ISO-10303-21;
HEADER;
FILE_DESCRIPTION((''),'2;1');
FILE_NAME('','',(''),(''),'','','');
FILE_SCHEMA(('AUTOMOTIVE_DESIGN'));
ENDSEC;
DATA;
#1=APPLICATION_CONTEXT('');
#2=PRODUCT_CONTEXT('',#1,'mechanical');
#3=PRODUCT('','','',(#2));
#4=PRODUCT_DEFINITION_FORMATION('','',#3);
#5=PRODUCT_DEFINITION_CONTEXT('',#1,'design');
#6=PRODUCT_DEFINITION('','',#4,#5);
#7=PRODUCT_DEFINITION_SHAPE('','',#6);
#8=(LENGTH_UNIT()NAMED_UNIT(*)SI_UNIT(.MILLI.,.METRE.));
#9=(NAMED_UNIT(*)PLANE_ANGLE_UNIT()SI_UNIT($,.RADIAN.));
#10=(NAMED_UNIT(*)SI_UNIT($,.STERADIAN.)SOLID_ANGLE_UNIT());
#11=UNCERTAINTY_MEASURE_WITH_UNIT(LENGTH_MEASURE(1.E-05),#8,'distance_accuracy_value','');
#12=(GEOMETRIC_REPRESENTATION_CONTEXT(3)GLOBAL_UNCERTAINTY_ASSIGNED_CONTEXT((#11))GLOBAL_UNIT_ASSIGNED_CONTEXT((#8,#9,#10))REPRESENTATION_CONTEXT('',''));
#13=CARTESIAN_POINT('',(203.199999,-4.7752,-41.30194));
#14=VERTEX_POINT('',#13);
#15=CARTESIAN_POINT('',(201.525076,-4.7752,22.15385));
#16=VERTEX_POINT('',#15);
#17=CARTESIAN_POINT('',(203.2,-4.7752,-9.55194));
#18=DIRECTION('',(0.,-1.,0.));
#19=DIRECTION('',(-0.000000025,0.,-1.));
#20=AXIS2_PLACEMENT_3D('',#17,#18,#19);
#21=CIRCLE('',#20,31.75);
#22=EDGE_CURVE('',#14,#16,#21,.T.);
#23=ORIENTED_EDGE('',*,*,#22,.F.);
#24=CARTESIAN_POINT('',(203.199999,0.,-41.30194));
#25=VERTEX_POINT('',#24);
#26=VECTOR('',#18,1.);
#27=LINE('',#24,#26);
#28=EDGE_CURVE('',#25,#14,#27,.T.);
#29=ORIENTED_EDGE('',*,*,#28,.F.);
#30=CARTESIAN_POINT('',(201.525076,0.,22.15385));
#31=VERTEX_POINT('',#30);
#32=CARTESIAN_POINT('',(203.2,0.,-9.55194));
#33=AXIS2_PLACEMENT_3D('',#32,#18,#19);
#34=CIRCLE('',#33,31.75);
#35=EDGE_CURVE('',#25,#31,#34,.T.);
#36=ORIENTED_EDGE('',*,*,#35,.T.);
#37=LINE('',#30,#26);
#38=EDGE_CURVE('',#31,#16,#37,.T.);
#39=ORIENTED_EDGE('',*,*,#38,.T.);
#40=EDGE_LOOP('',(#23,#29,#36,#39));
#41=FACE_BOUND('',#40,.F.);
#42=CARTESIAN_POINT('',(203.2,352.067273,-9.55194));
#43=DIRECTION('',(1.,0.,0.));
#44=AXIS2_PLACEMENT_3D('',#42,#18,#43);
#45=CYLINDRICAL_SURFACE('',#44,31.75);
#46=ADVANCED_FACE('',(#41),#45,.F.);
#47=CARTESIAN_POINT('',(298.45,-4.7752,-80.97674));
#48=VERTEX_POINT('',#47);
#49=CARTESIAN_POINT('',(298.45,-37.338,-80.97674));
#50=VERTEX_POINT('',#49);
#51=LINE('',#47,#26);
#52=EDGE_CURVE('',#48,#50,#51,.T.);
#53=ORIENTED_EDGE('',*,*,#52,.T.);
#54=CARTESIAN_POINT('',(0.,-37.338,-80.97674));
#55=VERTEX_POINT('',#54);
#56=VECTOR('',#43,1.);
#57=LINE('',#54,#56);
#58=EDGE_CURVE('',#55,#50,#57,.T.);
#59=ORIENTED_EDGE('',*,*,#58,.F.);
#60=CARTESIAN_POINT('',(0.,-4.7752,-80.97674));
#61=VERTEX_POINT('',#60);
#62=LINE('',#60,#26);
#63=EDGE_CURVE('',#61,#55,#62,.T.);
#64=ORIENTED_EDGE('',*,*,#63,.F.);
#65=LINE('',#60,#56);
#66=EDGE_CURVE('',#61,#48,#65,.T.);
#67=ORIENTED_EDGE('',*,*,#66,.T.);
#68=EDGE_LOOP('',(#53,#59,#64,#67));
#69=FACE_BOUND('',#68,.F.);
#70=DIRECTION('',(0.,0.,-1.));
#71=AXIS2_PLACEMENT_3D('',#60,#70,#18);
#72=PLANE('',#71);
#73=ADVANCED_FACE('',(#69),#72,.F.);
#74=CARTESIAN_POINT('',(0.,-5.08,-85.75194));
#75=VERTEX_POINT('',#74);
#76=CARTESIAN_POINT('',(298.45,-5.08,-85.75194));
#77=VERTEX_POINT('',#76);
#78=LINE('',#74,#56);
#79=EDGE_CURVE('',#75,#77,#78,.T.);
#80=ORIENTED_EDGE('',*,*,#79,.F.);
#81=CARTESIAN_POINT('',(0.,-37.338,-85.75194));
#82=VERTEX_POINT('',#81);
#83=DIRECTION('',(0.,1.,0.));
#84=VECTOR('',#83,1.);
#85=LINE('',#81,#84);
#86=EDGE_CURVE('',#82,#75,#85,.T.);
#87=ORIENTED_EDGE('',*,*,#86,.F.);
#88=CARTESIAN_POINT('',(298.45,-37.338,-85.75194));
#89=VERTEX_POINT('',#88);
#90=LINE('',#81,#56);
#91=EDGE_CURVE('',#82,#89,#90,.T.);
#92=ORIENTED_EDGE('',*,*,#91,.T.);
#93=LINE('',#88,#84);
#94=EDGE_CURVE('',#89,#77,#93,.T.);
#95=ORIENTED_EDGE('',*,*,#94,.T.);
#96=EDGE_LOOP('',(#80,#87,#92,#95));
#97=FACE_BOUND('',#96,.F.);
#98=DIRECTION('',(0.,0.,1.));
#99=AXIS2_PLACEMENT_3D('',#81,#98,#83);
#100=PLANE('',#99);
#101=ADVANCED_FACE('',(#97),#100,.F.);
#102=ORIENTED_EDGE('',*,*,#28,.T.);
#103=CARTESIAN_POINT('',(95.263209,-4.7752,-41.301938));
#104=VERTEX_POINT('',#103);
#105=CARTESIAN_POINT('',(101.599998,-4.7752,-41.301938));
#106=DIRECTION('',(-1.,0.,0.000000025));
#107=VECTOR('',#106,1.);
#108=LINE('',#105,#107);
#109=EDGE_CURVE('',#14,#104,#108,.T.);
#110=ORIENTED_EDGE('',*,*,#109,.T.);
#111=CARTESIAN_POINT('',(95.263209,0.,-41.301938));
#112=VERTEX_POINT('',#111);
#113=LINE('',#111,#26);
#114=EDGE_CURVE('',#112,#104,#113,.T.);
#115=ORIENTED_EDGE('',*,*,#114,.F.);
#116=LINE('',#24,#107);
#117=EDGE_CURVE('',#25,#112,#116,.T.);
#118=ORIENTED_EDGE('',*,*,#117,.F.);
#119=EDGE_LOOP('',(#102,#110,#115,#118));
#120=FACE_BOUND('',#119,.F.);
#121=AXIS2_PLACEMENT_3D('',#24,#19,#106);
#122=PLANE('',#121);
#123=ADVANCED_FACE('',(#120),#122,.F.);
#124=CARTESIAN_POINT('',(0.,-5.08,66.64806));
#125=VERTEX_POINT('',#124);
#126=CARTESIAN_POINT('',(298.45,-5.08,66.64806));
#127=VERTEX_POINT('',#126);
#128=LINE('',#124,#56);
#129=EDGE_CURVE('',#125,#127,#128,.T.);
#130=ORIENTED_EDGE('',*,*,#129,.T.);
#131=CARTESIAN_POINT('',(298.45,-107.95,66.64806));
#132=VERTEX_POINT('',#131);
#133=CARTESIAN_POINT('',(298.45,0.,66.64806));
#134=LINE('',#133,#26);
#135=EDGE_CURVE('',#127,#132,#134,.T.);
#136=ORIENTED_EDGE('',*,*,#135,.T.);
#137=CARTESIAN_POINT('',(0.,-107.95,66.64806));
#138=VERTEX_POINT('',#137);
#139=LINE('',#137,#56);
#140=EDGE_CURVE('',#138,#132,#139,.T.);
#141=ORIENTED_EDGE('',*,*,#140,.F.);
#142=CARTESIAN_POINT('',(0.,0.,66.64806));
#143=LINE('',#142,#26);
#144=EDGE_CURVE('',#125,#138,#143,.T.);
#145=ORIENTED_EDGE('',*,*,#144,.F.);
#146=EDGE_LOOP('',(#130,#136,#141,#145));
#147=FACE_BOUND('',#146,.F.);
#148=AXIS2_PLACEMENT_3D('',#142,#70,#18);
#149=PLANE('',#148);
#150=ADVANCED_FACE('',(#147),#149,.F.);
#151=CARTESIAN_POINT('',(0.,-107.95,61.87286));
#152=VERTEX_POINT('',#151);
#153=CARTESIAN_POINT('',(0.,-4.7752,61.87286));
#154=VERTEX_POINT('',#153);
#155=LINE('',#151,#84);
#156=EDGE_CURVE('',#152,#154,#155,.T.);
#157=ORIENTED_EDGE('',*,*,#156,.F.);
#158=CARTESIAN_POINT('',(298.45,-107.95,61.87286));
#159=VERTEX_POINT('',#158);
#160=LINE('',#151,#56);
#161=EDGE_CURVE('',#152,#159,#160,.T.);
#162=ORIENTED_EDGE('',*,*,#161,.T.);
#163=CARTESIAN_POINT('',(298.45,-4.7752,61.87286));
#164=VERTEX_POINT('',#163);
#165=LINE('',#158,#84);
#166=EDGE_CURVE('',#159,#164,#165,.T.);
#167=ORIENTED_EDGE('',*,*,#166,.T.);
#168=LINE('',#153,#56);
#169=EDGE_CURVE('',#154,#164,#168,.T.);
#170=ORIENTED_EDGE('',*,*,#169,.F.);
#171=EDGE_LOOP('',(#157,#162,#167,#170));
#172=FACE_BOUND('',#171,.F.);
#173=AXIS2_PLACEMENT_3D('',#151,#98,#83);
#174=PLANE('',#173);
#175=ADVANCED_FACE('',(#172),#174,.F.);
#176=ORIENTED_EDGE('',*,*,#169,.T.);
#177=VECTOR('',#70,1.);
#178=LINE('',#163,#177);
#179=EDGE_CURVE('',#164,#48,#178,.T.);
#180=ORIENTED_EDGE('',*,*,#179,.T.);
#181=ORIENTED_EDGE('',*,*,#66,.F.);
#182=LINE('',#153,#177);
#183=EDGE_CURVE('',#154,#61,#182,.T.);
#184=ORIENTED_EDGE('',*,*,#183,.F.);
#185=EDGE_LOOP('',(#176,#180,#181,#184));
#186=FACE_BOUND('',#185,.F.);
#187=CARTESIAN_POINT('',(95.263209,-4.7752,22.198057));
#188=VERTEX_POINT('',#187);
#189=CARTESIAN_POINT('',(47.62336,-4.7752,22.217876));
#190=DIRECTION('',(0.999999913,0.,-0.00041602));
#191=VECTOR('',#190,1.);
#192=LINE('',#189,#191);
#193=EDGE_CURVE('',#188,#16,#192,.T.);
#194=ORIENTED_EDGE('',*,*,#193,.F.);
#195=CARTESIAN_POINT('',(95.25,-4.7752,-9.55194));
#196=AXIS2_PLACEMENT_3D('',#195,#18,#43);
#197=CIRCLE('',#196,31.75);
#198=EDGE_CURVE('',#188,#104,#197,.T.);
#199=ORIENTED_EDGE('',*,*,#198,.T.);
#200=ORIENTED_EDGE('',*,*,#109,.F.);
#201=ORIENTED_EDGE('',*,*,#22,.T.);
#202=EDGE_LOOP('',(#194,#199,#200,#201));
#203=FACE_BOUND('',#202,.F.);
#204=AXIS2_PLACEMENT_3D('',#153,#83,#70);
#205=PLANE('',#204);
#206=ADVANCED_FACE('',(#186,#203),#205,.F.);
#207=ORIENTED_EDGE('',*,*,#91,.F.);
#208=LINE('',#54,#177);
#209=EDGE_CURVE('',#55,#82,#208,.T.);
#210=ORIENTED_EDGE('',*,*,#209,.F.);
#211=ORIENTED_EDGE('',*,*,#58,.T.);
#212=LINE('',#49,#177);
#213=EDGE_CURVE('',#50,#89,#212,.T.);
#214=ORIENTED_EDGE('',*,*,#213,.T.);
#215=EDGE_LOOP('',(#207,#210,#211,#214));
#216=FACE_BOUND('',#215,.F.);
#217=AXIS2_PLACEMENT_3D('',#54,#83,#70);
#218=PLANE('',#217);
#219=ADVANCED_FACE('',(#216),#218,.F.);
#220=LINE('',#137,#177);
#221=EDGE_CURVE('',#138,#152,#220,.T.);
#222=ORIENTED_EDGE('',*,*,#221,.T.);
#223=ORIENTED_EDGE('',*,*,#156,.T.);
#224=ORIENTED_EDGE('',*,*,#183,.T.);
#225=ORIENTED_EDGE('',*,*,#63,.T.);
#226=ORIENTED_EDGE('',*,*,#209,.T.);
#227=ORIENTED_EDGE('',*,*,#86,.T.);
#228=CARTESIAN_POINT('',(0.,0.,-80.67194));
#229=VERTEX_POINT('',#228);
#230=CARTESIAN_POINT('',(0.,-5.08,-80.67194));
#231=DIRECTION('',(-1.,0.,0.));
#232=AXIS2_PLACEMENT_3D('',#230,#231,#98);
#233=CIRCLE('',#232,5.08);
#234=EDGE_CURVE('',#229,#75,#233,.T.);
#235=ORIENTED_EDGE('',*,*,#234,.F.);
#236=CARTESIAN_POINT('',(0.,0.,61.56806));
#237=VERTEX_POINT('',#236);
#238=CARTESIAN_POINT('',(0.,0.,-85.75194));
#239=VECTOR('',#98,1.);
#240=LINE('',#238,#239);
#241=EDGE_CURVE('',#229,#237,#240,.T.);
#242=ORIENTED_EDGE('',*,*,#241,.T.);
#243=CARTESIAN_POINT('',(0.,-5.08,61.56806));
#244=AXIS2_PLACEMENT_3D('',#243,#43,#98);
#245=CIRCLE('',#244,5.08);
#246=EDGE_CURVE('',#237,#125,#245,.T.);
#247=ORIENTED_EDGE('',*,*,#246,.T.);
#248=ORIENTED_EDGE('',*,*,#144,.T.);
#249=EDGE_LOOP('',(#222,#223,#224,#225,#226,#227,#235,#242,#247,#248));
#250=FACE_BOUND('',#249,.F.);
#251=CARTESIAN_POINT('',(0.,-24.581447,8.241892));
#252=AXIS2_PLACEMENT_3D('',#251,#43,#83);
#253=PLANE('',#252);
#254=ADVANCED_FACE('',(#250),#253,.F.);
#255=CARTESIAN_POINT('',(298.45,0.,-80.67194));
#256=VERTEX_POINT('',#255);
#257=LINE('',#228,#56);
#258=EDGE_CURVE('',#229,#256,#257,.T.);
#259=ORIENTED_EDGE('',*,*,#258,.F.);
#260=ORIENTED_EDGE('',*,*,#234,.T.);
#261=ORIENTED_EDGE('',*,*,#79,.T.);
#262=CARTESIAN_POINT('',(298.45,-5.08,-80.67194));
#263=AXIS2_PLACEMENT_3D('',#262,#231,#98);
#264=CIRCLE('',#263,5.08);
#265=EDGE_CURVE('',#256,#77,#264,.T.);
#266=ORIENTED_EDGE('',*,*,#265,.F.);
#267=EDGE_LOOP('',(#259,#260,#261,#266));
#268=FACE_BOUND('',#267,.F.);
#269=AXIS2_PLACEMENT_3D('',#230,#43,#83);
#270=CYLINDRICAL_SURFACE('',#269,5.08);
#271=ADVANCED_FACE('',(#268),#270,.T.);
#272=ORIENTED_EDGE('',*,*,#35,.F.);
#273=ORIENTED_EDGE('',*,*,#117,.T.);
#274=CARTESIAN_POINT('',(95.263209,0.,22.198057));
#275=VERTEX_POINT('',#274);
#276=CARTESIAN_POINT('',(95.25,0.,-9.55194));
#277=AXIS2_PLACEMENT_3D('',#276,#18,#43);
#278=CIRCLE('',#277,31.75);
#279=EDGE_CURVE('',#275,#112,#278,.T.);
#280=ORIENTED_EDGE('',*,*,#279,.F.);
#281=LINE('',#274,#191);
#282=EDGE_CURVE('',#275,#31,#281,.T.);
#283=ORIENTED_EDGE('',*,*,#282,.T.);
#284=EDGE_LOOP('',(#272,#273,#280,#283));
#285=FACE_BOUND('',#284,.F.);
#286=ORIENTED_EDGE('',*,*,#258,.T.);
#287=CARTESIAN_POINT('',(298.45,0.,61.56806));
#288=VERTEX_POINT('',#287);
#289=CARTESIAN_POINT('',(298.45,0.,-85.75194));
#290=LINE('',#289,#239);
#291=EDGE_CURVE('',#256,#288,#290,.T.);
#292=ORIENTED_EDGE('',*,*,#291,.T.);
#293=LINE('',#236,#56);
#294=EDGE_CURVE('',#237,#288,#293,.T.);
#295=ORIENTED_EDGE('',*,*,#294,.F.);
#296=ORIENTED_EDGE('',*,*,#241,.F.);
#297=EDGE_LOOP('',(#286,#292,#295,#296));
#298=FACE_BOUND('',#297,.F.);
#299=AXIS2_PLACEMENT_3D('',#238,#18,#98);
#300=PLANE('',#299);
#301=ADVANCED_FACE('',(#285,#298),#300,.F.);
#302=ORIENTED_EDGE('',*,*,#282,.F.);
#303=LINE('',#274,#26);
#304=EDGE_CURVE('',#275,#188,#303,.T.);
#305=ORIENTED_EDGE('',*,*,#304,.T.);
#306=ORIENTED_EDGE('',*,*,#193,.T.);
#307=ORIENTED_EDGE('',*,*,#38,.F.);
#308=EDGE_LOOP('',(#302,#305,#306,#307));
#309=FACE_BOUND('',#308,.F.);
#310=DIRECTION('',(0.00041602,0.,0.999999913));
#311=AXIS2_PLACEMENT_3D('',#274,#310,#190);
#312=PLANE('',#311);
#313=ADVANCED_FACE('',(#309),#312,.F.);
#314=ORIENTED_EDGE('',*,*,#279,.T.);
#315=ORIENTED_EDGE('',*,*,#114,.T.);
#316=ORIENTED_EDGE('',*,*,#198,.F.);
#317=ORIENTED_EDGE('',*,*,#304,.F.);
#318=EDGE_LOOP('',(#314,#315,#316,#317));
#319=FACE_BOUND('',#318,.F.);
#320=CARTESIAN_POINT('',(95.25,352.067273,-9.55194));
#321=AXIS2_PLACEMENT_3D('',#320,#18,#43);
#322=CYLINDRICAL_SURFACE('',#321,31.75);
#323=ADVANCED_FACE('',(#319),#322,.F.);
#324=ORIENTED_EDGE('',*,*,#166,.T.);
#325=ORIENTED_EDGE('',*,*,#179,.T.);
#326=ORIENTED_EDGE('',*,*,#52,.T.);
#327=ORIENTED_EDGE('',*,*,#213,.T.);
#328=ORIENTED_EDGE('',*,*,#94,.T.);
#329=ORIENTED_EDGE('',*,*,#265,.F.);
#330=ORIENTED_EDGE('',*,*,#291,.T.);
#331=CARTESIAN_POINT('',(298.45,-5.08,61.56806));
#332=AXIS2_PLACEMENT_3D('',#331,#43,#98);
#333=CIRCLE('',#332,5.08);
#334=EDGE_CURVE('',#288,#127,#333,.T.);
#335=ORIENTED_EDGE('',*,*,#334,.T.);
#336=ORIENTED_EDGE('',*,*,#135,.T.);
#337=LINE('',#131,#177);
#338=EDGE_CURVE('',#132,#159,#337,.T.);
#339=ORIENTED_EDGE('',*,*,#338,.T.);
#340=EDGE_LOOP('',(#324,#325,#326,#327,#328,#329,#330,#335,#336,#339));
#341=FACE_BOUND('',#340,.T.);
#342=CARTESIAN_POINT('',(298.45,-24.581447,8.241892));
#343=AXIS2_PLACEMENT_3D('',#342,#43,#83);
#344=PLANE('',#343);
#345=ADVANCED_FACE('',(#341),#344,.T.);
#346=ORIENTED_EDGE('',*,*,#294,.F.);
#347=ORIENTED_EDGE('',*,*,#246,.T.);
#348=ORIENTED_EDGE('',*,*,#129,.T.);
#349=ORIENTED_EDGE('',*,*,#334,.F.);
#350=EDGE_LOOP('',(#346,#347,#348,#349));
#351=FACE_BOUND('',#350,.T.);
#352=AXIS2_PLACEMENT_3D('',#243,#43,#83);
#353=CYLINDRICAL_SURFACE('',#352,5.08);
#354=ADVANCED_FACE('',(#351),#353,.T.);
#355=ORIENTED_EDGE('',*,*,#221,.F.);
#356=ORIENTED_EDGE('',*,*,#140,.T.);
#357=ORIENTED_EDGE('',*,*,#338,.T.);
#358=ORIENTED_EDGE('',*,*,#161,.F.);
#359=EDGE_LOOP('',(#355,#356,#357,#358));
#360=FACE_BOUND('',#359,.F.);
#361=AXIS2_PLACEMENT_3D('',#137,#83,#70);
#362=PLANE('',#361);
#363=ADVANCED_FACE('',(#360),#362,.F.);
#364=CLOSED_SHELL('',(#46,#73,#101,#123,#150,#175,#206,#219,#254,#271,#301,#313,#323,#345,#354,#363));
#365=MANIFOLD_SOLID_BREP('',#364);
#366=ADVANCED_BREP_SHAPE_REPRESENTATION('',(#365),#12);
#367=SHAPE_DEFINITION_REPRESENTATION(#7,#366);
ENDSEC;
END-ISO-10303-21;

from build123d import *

# Parameters (mm, degrees)
F1_DEPTH = 298.45
F2_R     = 5.08
F4_D     = 63.5
F6_DEPTH = 25.4


with BuildPart() as f1:
    # F0 (on Right) → F1 (new body)
    with BuildSketch(Plane.YZ):
        Polygon((0, -85.7519404639), (0, 66.6480595361), (-107.95, 66.6480595361), (-107.95, 61.8728595361), (-4.7752, 61.8728595361), (-4.7752, -80.9767404639), (-37.338, -80.9767404639), (-37.338, -85.7519404639), align=None)
    extrude(amount=F1_DEPTH)

    # F2
    f2_edges = [f1.edges().sort_by_distance(p)[0] for p in [
        (149.225, 0, 66.64806),
        (149.225, 0, -85.75194),
    ]]
    fillet(f2_edges, radius=F2_R)

    # F4 (through all)
    with Locations(Plane(origin=(0, 0, 0), x_dir=(-1, 0, 0), z_dir=(0, 1, 0))):
        with Locations((-203.2, -9.5519404639), (-95.25, -9.5519404639)):
            Hole(F4_D / 2)

    # F5 (on face) → F6 (cut)
    with BuildSketch(Plane(origin=(0, 0, 0), x_dir=(-1, 0, 0), z_dir=(0, 1, 0))):
        with BuildLine():
            Line((-95.2632086497, 22.1980567886), (-201.5250755989, 22.1538496737))
            ThreePointArc((-201.5250755989, 22.1538496737), (-180.1647948812, 12.2985017543), (-171.45, -9.5519404639))
            ThreePointArc((-171.45, -9.5519404639), (-180.7493594116, -32.0025804808), (-203.1999991918, -41.3019404639))
            Line((-203.1999991918, -41.3019404639), (-95.2632086497, -41.3019377164))
            ThreePointArc((-95.2632086497, -41.3019377164), (-127, -9.5519404639), (-95.2632086497, 22.1980567886))
        make_face()
    extrude(amount=-F6_DEPTH, mode=Mode.SUBTRACT)


solid = f1.part
